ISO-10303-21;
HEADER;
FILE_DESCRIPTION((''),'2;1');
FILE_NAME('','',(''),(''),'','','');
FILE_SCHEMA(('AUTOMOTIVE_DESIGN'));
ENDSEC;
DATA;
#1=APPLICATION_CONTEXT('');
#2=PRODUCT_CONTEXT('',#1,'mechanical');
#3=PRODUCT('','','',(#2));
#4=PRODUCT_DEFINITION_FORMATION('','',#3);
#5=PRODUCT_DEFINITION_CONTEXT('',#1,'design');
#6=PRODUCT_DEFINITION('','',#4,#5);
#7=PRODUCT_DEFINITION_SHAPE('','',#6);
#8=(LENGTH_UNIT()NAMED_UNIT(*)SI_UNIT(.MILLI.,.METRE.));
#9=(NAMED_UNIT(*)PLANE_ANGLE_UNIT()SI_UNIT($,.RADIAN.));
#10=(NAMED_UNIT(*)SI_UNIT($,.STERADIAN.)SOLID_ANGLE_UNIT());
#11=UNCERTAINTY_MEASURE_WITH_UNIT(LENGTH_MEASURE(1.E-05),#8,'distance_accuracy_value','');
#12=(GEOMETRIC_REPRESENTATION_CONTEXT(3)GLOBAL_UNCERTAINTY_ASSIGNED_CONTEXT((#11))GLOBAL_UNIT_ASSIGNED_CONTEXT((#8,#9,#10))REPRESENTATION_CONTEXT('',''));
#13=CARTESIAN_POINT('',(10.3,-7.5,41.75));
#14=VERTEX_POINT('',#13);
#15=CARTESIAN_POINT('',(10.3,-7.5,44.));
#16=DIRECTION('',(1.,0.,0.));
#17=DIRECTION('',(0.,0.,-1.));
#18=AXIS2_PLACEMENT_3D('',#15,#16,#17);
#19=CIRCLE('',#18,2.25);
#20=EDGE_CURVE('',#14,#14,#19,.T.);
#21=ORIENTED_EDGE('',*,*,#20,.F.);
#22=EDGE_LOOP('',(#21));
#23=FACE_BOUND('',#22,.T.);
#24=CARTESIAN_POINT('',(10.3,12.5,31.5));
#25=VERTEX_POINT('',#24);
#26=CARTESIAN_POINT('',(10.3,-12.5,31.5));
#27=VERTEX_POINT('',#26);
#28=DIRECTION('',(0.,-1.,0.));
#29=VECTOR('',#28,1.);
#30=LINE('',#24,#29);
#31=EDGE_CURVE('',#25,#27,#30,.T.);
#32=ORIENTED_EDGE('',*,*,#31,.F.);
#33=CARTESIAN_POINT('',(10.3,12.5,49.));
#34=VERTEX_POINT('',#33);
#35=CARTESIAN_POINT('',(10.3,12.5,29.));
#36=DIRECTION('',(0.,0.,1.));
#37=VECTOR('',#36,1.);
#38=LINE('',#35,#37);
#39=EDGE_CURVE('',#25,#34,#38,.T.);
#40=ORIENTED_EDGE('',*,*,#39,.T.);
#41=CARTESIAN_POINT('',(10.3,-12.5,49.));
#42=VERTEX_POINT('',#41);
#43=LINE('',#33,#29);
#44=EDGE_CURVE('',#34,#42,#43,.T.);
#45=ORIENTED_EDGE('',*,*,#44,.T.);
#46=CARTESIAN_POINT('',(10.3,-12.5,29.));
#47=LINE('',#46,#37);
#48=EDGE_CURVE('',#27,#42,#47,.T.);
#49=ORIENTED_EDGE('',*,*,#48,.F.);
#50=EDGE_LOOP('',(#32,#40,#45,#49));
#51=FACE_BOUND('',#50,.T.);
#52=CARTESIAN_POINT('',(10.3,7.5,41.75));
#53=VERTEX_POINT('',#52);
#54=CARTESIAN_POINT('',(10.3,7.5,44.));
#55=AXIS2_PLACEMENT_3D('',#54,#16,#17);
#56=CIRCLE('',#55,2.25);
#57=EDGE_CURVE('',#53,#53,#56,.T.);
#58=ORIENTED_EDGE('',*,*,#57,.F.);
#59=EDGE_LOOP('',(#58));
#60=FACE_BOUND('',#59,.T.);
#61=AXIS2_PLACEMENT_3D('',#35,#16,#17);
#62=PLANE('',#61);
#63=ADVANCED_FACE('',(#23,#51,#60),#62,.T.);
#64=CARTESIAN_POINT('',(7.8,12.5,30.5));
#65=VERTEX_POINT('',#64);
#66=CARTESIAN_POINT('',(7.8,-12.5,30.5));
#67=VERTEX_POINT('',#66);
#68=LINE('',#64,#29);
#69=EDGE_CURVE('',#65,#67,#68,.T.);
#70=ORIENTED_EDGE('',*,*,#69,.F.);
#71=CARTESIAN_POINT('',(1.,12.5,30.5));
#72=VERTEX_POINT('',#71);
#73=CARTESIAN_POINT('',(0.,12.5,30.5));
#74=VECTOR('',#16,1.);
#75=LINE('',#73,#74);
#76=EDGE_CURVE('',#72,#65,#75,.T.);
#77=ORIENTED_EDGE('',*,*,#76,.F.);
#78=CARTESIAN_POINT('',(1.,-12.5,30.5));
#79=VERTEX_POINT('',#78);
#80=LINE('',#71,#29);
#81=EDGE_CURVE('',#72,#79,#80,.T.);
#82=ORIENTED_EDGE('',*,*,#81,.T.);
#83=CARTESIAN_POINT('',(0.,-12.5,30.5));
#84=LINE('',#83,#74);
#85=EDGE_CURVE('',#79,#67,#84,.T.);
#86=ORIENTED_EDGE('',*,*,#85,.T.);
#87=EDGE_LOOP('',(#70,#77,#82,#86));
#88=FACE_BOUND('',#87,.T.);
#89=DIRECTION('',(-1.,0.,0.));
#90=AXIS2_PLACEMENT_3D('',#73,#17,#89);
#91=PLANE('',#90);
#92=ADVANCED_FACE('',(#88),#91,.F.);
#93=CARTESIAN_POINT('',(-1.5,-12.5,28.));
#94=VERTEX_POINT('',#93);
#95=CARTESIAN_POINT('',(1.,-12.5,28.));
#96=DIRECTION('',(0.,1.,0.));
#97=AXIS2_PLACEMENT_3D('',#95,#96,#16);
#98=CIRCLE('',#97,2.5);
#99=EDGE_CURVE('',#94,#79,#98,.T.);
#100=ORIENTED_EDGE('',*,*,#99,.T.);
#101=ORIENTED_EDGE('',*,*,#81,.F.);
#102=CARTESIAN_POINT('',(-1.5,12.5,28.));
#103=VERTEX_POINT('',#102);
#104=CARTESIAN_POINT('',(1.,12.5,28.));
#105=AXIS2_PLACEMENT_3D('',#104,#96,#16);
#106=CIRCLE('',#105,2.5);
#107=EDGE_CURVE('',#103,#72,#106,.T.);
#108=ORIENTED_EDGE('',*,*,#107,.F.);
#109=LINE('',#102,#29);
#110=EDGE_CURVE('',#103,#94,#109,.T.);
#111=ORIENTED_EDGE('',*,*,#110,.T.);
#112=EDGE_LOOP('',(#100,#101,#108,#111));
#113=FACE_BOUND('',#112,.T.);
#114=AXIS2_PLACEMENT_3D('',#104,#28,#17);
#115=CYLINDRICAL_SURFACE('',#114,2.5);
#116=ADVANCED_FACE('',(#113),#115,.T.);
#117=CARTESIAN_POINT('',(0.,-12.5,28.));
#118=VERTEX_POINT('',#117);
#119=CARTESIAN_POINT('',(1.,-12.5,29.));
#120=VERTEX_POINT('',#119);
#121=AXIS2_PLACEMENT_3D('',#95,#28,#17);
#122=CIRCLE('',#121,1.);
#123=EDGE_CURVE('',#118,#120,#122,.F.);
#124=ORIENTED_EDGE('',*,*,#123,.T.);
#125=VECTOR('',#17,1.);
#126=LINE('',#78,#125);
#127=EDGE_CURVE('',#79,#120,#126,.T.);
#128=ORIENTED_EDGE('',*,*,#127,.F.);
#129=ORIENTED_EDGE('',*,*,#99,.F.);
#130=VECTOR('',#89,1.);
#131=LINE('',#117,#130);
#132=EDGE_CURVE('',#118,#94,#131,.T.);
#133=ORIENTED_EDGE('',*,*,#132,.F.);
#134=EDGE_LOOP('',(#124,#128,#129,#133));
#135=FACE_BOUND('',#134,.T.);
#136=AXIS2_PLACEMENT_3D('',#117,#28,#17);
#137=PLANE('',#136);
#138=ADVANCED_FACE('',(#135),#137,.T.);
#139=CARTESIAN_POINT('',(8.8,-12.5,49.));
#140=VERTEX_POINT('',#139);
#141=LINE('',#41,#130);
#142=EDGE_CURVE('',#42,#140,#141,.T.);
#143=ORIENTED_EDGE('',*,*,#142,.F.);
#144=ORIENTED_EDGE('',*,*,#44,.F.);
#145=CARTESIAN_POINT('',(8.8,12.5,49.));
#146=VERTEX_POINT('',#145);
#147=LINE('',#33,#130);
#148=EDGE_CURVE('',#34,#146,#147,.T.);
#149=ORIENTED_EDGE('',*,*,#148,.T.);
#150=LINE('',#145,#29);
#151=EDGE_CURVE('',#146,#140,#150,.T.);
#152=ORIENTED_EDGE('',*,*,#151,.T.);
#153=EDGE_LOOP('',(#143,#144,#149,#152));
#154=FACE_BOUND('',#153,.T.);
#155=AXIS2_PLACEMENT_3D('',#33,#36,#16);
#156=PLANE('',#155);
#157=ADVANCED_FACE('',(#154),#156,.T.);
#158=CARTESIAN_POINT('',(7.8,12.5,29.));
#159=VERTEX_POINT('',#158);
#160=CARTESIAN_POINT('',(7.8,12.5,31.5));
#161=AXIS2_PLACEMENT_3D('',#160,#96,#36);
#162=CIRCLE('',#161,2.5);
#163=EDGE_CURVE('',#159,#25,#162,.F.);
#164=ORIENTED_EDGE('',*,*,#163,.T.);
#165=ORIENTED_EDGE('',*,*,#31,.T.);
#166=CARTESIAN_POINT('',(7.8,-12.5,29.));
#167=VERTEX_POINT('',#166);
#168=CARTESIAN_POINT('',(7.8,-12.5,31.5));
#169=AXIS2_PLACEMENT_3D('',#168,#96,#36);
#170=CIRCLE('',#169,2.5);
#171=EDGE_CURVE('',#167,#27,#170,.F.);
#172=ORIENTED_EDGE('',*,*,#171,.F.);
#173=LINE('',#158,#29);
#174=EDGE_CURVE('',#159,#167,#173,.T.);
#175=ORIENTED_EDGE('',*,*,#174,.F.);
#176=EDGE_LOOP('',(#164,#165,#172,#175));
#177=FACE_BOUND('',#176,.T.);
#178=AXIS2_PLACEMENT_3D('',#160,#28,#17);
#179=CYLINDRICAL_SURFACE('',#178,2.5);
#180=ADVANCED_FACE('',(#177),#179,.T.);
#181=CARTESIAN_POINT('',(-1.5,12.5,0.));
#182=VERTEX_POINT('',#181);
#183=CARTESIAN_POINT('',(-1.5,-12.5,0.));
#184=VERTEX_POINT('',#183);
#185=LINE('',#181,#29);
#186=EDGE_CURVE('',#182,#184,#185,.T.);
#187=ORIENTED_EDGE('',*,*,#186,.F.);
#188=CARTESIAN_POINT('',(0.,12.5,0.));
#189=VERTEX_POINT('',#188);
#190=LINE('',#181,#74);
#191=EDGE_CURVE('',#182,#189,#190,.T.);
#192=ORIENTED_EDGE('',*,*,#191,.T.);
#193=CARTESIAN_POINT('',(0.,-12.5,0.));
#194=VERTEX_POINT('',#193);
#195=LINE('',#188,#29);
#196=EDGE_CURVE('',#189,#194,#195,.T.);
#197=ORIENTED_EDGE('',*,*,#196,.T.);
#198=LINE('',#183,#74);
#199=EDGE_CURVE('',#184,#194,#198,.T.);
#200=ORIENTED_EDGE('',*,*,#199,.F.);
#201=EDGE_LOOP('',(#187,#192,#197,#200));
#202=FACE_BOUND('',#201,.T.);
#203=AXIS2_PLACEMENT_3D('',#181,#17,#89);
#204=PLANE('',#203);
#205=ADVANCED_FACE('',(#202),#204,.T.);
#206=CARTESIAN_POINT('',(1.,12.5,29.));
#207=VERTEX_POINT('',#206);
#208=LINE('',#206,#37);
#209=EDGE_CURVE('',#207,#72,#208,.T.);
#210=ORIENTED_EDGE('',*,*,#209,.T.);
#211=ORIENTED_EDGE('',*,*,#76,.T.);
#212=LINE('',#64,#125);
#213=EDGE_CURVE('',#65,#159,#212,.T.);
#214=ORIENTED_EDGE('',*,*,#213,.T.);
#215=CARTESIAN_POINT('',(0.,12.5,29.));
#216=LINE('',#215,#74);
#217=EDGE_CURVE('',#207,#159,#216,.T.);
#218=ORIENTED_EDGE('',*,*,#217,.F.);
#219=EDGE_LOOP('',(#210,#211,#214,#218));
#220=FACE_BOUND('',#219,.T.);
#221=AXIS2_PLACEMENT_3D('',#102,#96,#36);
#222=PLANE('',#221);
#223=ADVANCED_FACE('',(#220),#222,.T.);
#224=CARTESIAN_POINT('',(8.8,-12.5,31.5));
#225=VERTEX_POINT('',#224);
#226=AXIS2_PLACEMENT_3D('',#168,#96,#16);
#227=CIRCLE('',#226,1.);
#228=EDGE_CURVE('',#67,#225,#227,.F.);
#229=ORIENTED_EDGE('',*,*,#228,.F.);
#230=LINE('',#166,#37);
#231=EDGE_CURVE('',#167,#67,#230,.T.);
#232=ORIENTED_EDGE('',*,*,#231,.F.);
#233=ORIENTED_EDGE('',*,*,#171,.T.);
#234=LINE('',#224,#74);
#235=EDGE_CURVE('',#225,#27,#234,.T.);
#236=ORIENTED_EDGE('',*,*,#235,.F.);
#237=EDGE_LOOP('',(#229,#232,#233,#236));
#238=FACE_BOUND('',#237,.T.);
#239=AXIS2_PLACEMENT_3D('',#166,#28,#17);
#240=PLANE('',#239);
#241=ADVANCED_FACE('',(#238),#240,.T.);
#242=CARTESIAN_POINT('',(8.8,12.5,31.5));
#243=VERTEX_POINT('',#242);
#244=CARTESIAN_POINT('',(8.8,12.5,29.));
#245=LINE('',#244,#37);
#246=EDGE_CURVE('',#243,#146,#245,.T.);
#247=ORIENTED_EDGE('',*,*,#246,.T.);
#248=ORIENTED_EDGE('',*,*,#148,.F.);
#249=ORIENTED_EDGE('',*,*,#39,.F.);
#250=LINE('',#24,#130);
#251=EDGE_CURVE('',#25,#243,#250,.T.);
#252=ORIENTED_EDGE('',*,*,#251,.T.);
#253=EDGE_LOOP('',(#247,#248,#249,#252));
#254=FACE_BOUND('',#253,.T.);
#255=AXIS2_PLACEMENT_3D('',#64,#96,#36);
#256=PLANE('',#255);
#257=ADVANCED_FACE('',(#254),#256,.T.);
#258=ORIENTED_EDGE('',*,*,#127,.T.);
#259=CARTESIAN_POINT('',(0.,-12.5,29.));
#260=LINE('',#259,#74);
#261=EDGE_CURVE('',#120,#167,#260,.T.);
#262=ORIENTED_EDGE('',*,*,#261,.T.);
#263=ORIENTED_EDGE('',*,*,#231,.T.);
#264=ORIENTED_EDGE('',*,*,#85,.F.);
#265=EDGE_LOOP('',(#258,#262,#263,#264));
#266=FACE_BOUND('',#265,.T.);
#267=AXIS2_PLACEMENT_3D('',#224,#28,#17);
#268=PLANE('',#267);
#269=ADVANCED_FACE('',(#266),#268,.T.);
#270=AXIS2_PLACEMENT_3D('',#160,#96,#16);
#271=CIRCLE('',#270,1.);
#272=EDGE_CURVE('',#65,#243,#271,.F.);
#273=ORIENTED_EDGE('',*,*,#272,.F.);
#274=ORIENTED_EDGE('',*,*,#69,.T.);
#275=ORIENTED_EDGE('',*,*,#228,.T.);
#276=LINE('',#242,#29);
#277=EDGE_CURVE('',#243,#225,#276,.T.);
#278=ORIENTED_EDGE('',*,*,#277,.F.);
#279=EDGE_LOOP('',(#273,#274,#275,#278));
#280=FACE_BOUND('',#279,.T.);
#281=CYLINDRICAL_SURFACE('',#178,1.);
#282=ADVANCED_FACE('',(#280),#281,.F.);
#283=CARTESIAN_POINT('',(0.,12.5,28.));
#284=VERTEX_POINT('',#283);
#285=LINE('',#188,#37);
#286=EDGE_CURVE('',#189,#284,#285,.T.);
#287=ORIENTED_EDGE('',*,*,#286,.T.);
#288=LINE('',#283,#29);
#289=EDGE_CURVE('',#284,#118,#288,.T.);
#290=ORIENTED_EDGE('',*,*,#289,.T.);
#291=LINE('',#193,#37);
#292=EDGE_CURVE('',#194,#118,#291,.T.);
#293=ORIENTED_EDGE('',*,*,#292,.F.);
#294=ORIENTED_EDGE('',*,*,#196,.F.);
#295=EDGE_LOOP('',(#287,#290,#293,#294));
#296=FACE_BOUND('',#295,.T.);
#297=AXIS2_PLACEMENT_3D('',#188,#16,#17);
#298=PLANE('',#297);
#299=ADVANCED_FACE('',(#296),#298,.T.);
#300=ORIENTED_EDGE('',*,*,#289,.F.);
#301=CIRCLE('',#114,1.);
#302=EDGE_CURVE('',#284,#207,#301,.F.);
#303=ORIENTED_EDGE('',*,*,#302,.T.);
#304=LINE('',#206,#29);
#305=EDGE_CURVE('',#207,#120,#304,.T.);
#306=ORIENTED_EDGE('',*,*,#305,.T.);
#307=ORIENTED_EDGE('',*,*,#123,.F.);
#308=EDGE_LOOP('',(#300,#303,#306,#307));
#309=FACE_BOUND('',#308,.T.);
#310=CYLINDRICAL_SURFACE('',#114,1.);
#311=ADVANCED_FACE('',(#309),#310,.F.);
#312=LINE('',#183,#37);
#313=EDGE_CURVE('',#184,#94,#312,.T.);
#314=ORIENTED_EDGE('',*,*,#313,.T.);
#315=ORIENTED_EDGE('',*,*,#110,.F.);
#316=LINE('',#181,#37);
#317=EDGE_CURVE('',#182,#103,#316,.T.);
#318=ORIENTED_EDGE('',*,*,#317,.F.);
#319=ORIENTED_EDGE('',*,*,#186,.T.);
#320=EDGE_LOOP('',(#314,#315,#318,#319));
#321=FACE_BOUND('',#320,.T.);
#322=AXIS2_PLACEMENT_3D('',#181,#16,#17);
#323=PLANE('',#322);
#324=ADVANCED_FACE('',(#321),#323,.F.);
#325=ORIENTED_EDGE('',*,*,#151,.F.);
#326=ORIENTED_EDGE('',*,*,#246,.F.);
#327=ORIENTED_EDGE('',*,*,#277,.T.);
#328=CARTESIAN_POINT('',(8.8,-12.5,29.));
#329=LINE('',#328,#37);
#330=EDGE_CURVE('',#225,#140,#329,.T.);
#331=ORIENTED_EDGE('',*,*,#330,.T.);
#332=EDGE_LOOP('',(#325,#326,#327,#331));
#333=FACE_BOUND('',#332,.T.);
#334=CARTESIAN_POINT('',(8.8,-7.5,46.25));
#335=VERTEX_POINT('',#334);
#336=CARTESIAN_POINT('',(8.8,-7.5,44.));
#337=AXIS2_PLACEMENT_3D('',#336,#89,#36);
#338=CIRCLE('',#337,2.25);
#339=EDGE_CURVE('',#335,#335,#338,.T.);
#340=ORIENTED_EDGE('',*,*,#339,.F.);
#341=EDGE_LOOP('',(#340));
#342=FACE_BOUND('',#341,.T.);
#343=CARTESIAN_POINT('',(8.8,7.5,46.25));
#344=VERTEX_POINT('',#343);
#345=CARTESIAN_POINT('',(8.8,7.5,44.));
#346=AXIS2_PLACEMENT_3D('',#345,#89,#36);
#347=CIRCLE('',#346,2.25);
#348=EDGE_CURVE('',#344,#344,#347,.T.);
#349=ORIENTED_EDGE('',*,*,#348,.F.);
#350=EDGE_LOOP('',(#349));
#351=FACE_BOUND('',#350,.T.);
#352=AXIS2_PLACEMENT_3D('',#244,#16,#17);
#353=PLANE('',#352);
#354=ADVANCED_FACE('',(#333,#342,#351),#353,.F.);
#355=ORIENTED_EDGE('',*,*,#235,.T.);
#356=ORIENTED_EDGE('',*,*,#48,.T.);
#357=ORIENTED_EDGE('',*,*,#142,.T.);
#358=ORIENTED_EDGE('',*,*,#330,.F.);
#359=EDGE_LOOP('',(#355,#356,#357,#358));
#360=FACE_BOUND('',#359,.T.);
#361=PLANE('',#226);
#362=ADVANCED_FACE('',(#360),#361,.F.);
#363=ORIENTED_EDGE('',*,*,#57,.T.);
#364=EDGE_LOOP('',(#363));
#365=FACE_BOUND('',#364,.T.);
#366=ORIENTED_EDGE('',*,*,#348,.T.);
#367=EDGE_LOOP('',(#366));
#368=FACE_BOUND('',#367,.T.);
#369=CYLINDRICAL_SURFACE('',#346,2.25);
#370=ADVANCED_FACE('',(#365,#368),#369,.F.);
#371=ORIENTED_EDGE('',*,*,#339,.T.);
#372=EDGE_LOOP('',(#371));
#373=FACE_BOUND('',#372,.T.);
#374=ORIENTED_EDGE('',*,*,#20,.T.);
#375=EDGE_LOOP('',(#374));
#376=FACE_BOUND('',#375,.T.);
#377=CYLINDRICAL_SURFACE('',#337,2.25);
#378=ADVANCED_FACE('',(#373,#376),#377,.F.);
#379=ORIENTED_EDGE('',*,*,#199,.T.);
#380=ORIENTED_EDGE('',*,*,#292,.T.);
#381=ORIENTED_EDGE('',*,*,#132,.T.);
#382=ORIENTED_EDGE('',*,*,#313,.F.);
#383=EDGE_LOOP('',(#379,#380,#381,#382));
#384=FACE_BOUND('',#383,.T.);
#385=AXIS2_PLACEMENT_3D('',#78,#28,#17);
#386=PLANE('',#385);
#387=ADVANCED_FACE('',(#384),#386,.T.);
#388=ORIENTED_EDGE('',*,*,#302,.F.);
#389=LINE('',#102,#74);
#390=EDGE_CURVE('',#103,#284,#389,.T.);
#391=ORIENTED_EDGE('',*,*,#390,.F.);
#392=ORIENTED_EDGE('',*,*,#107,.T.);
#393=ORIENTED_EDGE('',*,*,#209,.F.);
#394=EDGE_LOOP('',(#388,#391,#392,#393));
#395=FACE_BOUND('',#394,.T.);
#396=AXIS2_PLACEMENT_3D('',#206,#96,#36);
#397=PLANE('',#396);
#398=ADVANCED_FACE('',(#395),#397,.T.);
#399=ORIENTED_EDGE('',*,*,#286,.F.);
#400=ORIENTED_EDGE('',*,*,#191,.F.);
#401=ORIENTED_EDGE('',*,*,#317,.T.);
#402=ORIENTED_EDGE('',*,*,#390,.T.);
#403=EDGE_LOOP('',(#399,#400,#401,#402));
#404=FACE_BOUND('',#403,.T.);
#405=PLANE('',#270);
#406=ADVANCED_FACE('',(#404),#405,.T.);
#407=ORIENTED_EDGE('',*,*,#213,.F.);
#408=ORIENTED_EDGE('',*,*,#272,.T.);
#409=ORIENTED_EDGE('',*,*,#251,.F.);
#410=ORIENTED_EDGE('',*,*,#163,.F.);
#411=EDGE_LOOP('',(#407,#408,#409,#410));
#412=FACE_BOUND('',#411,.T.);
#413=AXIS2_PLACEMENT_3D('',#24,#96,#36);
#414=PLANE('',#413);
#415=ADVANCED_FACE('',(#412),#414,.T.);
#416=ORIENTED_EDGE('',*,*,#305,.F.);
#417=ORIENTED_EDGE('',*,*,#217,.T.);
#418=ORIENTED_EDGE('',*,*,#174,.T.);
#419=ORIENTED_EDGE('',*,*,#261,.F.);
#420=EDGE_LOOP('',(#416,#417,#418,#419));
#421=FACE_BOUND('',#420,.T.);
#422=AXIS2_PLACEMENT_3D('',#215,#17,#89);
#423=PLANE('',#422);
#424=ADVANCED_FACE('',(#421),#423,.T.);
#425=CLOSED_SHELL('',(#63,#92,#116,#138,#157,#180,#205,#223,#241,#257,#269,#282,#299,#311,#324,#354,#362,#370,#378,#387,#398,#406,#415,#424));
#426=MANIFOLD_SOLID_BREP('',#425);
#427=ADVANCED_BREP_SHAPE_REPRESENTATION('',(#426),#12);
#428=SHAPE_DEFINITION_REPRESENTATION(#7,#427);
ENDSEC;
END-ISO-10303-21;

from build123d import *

# Parameters (mm, degrees)
SM_BASE_FLANGE_1_DEPTH = 12.5
HOLE_WIZARD_M4_1_D     = 4.5


# Sheet-metal steps are written as plain solids
with BuildPart() as part:
    # Sketch 1 → 基体-法兰1 (new, symmetric)
    with BuildSketch(Plane(origin=(0, 0, 0), x_dir=(1, 0, 0), z_dir=(0, 1, 0))):
        with BuildLine():
            Line((0, 0), (0, -28))
            ThreePointArc((0, -28), (0.292893219, -28.707106781), (1, -29))
            Line((1, -29), (7.8, -29))
            ThreePointArc((7.8, -29), (9.567766953, -29.732233047), (10.3, -31.5))
            Line((10.3, -31.5), (10.3, -49))
            Line((10.3, -49), (8.8, -49))
            Line((8.8, -49), (8.8, -31.5))
            ThreePointArc((8.8, -31.5), (8.507106781, -30.792893219), (7.8, -30.5))
            Line((7.8, -30.5), (1, -30.5))
            ThreePointArc((1, -30.5), (-0.767766953, -29.767766953), (-1.5, -28))
            Line((-1.5, -28), (-1.5, 0))
            Line((-1.5, 0), (0, 0))
        make_face()
    extrude(amount=SM_BASE_FLANGE_1_DEPTH, both=True)

    # M4 间隙孔1 (through all)
    with Locations(Plane.ZY.offset(-8.8)):
        with Locations((44, 7.5), (44, -7.5)):
            Hole(HOLE_WIZARD_M4_1_D / 2)


solid = part.part
